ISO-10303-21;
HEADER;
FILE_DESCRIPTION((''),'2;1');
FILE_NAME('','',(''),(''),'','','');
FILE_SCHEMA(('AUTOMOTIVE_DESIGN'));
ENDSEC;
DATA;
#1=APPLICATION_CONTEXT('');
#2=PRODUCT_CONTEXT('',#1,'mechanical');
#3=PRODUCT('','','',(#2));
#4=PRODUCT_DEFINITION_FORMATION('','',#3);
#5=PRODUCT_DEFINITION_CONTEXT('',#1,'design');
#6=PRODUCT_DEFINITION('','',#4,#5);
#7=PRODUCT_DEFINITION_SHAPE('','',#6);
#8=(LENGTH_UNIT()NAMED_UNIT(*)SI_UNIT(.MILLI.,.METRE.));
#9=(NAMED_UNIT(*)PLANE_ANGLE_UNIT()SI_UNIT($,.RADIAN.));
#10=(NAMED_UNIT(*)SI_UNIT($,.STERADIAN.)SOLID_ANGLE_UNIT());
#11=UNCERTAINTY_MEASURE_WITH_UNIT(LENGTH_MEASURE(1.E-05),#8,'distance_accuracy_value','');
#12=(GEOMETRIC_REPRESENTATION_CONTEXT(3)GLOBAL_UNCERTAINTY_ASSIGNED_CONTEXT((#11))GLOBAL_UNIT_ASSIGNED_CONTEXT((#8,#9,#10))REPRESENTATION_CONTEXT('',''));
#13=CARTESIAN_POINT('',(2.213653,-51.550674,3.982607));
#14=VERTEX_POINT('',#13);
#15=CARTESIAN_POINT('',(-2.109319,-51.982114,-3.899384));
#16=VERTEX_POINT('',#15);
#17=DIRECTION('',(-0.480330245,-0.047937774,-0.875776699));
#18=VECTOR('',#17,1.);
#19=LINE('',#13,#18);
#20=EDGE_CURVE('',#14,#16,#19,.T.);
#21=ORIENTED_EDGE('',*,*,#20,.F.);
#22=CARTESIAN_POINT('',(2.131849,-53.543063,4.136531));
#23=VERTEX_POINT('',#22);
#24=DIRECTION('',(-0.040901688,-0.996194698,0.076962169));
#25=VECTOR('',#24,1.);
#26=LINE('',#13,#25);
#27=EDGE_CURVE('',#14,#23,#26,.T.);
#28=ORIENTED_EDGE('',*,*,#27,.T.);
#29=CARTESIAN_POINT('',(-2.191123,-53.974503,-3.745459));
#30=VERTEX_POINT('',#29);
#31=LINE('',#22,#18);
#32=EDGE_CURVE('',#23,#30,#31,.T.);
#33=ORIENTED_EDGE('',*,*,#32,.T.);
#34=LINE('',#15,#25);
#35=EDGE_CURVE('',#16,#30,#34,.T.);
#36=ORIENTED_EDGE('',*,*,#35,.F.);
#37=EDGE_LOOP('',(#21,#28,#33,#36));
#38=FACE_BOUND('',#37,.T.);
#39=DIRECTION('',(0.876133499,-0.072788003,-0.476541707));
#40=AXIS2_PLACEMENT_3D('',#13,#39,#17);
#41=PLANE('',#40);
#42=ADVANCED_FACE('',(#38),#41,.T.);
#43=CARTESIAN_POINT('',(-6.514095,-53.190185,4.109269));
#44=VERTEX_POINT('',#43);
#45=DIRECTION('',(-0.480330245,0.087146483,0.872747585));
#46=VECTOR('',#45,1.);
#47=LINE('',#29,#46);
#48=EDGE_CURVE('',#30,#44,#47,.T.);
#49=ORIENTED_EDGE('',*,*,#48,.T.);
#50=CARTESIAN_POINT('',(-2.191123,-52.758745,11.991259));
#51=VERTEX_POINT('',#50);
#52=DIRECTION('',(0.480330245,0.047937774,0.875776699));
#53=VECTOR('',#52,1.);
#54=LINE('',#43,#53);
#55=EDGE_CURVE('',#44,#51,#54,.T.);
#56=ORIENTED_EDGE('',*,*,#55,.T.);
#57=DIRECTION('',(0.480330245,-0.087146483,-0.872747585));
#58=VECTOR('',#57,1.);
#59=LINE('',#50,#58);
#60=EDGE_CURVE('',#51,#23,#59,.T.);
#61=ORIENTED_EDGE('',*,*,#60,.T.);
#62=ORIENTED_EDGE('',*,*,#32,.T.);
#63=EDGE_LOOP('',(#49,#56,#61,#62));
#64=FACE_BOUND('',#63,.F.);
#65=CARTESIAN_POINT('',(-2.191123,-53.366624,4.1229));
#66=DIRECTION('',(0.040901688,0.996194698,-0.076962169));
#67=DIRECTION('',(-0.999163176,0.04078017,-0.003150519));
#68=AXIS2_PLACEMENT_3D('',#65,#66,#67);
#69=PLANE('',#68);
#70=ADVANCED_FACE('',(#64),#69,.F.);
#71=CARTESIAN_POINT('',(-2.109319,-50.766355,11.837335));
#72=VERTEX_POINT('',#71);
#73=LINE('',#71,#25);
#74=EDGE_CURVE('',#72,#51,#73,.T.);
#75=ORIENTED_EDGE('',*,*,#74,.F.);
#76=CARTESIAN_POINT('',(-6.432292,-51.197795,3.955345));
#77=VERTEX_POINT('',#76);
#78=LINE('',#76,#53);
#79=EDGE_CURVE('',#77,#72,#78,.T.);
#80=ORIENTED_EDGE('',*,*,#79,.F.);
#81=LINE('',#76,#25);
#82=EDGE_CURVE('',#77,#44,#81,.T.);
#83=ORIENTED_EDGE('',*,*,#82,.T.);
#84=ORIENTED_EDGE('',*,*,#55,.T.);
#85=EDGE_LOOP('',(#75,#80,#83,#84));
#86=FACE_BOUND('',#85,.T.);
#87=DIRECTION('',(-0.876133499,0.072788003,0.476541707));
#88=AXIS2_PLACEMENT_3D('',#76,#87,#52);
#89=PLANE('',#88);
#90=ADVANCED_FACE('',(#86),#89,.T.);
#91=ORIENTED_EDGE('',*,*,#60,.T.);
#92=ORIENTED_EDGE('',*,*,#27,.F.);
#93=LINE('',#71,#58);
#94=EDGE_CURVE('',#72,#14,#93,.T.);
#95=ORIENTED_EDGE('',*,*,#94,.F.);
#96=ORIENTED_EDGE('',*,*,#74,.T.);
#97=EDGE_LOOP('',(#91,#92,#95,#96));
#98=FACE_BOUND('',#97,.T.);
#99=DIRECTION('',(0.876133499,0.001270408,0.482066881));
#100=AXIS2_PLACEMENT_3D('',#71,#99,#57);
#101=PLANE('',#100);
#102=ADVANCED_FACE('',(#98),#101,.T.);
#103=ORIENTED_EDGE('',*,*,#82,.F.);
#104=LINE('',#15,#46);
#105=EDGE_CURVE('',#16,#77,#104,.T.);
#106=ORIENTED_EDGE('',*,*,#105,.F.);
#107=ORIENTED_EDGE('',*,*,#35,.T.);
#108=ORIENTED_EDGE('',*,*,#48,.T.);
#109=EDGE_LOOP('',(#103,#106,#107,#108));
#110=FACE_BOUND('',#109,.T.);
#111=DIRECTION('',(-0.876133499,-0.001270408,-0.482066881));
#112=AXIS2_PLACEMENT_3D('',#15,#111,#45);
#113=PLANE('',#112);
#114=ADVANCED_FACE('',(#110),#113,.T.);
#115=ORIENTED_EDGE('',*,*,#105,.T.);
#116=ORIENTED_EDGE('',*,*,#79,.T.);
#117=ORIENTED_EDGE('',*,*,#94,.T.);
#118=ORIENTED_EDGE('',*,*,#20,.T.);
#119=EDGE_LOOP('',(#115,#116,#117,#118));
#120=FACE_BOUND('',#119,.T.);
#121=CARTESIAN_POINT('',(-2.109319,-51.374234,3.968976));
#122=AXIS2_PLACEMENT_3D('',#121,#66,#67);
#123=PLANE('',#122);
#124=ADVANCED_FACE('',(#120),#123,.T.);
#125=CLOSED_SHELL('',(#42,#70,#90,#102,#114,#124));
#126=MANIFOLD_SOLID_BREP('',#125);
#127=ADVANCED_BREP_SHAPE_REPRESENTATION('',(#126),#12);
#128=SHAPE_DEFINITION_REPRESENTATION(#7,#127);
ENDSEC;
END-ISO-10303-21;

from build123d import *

# Parameters (mm, degrees)
F1_DEPTH = 2
F6_DEPTH = 2


with BuildPart() as f1:
    # F0 (on Front) → F1 (new body)
    with BuildSketch(Plane.XZ):
        Polygon((5.1576569676, 2.7410463956), (0, 0), (5.1576569676, -2.7410463956), (10.3153139353, 0), align=None)
    extrude(amount=F1_DEPTH)


with BuildPart() as f6:
    # F5 (on face) → F6 (new body)
    with BuildSketch(Plane(origin=(-2.1093194974, -51.3742344161, 3.9689756511), x_dir=(-0.9991631758, 0.0407801704, -0.003150519), z_dir=(0.0409016879, 0.9961946981, -0.0769621688))):
        Polygon((0, 7.8918055439), (-4.3265928001, 0), (0, -7.8918055439), (4.3265928001, 0), align=None)
    extrude(amount=-F6_DEPTH)


solid = f6.part
